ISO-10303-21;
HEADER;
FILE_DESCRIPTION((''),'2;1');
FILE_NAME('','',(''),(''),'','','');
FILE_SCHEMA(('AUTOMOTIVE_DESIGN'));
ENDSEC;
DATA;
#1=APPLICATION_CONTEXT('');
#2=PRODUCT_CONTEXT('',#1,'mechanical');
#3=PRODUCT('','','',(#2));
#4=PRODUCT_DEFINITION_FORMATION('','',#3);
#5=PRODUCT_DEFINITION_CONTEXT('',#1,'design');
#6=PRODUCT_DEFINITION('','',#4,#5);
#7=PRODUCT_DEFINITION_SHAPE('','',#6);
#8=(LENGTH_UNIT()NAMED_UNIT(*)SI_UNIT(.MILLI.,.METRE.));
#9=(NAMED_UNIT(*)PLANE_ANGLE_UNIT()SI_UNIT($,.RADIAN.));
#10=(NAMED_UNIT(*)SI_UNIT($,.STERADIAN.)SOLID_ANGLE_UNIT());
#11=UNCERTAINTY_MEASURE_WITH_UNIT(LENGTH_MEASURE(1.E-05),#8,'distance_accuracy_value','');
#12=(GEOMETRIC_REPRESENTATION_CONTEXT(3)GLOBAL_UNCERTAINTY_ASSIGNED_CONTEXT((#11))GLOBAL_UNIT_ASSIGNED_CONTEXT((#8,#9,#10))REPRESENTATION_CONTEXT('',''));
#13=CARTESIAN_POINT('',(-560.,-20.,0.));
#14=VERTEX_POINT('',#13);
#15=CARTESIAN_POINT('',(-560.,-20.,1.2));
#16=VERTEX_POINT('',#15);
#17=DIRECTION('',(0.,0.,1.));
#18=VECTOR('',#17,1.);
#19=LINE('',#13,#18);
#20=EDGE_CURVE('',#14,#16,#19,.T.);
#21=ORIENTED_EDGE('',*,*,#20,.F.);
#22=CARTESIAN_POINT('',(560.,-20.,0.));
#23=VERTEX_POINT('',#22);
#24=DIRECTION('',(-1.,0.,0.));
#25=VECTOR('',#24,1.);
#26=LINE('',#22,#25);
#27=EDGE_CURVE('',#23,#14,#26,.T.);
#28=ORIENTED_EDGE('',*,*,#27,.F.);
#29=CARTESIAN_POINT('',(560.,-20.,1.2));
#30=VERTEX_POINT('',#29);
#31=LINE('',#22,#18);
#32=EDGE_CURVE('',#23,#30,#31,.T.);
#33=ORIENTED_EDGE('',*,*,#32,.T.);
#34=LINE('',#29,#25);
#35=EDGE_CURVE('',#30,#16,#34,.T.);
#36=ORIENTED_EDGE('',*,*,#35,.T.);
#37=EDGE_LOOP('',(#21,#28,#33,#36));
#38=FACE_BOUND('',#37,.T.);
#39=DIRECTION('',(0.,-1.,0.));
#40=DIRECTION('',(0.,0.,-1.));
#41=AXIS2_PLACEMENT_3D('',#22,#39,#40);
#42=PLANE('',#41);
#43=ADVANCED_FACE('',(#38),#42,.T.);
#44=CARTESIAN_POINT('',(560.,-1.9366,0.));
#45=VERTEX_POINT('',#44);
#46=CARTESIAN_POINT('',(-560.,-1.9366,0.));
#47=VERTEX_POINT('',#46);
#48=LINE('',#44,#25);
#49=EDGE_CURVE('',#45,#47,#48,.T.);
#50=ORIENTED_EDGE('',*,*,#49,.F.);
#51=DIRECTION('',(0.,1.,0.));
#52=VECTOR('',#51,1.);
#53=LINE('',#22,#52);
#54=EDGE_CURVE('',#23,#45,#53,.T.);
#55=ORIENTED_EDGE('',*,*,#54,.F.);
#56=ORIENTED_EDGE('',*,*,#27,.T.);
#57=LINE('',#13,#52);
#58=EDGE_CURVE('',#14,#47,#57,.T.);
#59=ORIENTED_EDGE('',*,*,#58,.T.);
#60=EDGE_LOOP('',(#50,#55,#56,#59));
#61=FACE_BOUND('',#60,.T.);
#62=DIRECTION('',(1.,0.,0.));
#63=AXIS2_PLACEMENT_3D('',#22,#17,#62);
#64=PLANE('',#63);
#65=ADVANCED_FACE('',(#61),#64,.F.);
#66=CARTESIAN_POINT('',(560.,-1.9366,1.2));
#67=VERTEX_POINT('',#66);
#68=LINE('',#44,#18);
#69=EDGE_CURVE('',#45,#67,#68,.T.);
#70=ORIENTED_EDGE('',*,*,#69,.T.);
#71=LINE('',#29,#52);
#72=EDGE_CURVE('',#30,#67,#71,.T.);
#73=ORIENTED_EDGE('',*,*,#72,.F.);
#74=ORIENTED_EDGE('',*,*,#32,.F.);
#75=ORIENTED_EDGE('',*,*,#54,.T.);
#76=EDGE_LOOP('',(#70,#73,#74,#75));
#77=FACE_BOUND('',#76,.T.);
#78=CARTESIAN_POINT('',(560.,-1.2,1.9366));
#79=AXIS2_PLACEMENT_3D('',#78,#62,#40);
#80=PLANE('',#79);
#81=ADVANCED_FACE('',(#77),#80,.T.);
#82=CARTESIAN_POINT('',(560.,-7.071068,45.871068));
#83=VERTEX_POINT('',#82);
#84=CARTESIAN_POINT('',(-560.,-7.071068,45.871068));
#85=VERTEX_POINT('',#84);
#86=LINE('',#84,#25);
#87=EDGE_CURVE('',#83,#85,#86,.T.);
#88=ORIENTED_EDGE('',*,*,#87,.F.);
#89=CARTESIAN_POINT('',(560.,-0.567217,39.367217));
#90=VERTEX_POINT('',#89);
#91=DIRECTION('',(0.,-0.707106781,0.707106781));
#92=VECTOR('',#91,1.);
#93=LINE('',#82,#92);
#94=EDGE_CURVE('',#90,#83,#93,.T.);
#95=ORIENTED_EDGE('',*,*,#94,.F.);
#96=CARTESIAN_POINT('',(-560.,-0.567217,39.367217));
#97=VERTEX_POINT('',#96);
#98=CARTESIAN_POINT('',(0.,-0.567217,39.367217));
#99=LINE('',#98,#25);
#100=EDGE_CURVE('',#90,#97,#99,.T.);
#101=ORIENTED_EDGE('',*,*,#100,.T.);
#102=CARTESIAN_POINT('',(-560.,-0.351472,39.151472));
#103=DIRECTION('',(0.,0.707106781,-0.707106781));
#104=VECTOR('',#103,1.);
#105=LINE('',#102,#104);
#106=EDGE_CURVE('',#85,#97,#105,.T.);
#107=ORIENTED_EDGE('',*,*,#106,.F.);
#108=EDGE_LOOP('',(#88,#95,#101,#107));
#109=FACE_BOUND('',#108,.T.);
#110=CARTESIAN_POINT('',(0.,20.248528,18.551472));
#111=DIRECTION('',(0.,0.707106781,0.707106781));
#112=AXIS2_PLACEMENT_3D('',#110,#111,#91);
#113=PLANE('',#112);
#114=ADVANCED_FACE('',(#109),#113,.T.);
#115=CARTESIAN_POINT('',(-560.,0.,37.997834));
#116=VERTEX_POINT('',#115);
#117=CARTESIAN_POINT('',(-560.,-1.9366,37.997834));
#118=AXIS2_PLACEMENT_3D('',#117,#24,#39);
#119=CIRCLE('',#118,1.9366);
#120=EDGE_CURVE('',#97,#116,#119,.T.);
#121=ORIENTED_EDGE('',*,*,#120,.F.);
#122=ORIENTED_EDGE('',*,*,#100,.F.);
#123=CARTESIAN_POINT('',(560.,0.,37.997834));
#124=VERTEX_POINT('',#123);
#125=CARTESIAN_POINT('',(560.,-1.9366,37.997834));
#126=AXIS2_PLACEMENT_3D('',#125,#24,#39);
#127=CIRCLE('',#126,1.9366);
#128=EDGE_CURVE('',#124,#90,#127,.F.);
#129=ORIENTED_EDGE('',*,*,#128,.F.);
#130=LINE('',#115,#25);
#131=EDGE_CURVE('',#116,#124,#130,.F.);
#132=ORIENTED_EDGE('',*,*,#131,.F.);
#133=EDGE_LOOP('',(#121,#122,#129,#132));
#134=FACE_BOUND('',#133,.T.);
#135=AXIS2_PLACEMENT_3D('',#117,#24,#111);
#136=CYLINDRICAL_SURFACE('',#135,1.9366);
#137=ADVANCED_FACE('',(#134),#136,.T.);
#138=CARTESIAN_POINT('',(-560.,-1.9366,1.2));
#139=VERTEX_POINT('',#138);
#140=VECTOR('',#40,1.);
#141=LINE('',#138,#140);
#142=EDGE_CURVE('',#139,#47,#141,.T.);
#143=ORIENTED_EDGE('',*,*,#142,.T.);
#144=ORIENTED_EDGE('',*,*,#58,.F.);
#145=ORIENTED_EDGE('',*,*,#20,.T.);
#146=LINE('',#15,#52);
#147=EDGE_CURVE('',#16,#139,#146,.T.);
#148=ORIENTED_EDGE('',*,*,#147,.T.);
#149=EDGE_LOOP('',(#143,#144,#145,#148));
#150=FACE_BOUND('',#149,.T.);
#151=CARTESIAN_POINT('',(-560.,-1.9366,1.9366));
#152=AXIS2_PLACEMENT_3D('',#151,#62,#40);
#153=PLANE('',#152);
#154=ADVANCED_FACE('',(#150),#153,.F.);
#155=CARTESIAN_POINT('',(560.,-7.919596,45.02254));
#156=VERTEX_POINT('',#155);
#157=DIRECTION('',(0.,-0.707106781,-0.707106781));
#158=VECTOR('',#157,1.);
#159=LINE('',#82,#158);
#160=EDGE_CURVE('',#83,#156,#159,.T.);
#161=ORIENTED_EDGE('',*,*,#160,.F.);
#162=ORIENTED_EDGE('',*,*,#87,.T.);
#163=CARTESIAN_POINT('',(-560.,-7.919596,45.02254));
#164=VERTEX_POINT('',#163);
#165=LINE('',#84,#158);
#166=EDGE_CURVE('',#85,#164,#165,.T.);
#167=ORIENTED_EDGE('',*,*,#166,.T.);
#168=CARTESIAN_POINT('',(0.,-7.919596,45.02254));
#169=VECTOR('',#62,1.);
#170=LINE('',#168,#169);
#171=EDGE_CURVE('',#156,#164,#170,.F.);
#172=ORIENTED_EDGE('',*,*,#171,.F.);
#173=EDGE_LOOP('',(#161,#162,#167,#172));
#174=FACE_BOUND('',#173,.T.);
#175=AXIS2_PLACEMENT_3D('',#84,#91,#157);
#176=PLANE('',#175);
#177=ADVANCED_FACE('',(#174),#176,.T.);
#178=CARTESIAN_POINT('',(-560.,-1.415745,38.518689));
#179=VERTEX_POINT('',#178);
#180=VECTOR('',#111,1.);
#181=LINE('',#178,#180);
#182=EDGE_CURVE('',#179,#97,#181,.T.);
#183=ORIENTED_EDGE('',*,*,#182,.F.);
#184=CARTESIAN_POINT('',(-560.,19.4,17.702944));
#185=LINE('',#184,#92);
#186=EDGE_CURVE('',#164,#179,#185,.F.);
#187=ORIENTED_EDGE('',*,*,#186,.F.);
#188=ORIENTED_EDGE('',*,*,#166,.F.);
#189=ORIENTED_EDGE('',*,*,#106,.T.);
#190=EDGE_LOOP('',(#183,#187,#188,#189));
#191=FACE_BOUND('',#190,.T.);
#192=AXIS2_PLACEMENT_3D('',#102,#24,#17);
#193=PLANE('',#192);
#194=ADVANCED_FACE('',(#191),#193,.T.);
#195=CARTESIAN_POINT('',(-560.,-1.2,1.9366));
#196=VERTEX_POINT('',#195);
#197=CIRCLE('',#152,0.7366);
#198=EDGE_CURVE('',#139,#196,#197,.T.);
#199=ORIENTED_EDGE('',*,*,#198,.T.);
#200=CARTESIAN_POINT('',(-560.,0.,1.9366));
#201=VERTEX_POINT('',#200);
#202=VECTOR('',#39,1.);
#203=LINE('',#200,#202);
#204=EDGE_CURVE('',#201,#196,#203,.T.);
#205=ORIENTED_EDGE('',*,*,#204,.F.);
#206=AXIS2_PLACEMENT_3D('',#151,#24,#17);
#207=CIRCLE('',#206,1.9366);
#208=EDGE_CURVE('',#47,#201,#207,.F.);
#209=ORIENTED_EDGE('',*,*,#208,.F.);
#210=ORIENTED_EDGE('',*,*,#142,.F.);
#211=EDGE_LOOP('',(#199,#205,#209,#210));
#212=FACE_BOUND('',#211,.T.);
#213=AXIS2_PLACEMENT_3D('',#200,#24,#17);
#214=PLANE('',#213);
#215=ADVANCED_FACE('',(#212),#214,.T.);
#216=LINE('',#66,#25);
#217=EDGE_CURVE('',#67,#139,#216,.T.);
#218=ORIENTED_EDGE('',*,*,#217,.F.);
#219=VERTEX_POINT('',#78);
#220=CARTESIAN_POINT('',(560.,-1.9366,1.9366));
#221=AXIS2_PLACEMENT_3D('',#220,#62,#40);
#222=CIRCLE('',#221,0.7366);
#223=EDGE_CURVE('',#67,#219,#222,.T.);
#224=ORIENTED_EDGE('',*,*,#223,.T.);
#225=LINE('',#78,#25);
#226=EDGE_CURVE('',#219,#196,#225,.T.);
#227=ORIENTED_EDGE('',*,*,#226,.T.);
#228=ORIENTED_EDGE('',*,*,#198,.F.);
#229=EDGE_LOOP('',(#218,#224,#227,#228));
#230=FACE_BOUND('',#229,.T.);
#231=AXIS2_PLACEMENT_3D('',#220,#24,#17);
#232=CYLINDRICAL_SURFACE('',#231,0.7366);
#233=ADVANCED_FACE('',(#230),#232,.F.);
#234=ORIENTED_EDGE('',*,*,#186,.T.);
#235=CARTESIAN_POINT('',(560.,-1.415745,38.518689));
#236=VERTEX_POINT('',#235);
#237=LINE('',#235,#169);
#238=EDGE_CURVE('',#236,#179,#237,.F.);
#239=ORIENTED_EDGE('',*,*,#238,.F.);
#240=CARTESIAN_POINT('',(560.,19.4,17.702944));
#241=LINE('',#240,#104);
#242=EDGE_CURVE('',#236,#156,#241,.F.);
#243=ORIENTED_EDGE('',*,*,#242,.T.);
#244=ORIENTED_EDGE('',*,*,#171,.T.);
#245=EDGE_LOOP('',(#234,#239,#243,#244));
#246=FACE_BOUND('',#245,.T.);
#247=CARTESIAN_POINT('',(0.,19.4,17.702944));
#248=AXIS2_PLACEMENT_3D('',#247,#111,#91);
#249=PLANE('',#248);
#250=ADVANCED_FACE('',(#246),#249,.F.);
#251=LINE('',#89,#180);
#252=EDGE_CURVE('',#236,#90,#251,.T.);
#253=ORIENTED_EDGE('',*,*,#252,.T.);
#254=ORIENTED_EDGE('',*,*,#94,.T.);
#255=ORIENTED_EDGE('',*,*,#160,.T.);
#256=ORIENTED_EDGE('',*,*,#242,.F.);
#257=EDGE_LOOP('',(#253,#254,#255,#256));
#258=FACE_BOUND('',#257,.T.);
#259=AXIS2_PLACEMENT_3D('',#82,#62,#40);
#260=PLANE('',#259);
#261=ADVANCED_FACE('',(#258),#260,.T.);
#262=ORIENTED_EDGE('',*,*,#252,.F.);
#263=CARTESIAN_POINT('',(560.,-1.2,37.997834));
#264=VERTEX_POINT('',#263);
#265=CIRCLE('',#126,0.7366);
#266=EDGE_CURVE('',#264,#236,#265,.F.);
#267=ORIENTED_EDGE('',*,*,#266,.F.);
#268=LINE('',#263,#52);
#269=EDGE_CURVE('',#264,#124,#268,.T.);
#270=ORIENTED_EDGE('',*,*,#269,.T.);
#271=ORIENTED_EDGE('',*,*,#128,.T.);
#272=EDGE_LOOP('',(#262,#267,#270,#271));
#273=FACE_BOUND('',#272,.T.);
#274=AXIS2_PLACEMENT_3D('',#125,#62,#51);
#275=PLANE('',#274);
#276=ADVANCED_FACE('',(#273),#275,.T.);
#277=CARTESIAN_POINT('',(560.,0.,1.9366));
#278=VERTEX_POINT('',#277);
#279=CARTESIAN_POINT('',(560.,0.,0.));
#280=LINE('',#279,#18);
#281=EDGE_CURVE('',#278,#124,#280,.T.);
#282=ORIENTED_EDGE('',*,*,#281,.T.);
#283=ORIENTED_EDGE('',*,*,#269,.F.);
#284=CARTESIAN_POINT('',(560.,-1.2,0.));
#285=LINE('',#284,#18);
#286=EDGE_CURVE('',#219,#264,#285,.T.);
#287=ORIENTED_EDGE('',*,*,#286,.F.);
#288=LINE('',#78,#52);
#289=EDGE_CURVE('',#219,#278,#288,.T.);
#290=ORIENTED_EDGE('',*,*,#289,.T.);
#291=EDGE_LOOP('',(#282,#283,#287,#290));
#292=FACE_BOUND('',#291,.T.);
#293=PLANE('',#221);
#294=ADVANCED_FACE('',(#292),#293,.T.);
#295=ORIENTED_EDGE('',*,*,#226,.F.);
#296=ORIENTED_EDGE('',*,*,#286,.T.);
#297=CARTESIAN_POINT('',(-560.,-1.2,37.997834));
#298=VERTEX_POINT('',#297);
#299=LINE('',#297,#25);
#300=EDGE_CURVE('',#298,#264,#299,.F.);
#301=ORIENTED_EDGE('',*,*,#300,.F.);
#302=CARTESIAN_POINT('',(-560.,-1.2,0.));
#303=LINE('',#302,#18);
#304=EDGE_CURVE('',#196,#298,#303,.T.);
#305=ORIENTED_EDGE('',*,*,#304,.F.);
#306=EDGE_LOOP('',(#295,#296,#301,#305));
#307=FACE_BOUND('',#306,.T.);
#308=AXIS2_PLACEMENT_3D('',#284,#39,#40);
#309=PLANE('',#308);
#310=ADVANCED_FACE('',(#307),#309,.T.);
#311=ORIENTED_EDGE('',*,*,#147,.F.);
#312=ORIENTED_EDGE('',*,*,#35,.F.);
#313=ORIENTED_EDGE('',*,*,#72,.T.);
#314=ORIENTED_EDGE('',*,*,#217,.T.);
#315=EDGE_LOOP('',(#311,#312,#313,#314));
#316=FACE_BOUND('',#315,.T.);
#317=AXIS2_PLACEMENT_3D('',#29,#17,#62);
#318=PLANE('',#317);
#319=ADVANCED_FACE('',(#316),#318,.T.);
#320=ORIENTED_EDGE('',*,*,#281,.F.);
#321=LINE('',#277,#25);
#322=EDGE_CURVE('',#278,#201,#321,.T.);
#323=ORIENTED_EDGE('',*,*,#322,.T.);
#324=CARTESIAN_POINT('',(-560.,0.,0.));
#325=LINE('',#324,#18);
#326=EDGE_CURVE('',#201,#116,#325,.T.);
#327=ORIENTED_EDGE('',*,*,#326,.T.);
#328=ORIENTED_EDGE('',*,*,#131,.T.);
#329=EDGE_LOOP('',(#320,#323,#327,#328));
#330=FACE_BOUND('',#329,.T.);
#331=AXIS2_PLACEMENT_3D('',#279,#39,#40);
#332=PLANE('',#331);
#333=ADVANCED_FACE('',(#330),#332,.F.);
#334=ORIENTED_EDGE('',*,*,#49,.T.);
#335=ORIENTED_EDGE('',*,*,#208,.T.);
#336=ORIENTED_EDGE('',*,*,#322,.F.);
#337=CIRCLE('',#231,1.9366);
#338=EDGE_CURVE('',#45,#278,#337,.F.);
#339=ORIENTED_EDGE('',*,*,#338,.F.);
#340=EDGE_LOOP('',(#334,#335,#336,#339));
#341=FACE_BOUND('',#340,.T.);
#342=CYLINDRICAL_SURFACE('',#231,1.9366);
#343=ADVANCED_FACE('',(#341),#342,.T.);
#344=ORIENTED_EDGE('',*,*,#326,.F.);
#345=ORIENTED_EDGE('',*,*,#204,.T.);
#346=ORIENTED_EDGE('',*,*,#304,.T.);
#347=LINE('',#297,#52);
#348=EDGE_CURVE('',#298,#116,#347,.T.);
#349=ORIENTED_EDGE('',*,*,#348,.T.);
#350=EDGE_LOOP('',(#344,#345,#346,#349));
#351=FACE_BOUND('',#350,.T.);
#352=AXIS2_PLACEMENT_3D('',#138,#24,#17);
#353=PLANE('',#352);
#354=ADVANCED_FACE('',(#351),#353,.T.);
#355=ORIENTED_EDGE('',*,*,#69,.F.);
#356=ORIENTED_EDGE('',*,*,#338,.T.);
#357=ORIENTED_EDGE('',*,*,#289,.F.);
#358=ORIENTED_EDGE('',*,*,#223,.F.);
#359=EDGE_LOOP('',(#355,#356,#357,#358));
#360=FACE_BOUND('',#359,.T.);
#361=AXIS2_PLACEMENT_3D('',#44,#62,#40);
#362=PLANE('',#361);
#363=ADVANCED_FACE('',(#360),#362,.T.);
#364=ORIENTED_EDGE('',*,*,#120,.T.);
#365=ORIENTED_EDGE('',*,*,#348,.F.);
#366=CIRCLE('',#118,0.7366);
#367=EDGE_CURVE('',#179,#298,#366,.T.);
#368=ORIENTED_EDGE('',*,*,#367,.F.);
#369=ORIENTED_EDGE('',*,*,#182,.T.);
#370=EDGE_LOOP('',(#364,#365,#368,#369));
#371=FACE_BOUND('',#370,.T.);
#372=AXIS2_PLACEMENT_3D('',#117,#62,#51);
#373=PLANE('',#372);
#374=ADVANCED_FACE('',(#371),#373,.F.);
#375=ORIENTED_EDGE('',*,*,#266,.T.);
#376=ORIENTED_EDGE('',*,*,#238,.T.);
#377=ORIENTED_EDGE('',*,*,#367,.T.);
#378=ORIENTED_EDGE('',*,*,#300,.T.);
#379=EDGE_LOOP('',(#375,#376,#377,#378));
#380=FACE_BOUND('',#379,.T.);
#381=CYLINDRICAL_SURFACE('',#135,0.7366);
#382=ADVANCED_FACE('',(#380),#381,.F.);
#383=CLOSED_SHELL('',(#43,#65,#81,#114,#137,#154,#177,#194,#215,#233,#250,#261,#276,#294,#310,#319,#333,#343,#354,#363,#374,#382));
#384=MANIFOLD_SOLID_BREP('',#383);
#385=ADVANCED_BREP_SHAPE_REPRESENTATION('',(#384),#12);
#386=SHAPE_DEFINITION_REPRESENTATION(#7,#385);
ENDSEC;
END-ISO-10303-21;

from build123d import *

# Parameters (mm, degrees)
BASE_FLANGE1_DEPTH   = 560
EDGE_FLANGE1_START   = -560
EDGE_FLANGE1_DEPTH   = 1120
EDGE_FLANGE1_2_DEPTH = 1120


# Read off the part's stored shape, not the designer's step: Edge-Flange1
# Sheet-metal steps are written as plain solids
with BuildPart() as part:
    # Sketch1 → Base-Flange1 (new, symmetric)
    with BuildSketch(Plane(origin=(0, 0, 0), x_dir=(0, 0, -1), z_dir=(1, 0, 0))):
        with BuildLine():
            Line((0, -20), (0, -1.9366))
            ThreePointArc((0, -1.9366), (-0.567217008, -0.567217008), (-1.9366, 0))
            Line((-1.9366, 0), (-40, 0))
            Line((-40, 0), (-40, -1.2))
            Line((-40, -1.2), (-1.9366, -1.2))
            ThreePointArc((-1.9366, -1.2), (-1.415745145, -1.415745145), (-1.2, -1.9366))
            Line((-1.2, -1.9366), (-1.2, -20))
            Line((-1.2, -20), (0, -20))
        make_face()
    extrude(amount=BASE_FLANGE1_DEPTH, both=True)

    # Edge-Flange1 outline → Edge-Flange1 (cut)
    with BuildSketch(Plane.YZ.offset(EDGE_FLANGE1_START)):
        with BuildLine():
            Line((-1.2, 40), (-0.567217008, 39.367217008))
            ThreePointArc((-0.567217008, 39.367217008), (-0.147414897, 38.738938751), (0, 37.997834015))
            Line((0, 37.997834015), (0, 40))
            Line((0, 40), (-1.2, 40))
        make_face()
    extrude(amount=EDGE_FLANGE1_DEPTH, mode=Mode.SUBTRACT)

    # Edge-Flange1 2 outline → Edge-Flange1 2 (add)
    with BuildSketch(Plane.YZ.offset(EDGE_FLANGE1_START)):
        with BuildLine():
            Line((-1.2, 37.997834015), (-1.2, 40))
            Line((-1.2, 40), (-7.071067812, 45.871067812))
            Line((-7.071067812, 45.871067812), (-7.919595949, 45.022539674))
            Line((-7.919595949, 45.022539674), (-1.415745145, 38.51868887))
            ThreePointArc((-1.415745145, 38.51868887), (-1.256070336, 38.279718631), (-1.2, 37.997834015))
        make_face()
    extrude(amount=EDGE_FLANGE1_2_DEPTH)


solid = part.part
